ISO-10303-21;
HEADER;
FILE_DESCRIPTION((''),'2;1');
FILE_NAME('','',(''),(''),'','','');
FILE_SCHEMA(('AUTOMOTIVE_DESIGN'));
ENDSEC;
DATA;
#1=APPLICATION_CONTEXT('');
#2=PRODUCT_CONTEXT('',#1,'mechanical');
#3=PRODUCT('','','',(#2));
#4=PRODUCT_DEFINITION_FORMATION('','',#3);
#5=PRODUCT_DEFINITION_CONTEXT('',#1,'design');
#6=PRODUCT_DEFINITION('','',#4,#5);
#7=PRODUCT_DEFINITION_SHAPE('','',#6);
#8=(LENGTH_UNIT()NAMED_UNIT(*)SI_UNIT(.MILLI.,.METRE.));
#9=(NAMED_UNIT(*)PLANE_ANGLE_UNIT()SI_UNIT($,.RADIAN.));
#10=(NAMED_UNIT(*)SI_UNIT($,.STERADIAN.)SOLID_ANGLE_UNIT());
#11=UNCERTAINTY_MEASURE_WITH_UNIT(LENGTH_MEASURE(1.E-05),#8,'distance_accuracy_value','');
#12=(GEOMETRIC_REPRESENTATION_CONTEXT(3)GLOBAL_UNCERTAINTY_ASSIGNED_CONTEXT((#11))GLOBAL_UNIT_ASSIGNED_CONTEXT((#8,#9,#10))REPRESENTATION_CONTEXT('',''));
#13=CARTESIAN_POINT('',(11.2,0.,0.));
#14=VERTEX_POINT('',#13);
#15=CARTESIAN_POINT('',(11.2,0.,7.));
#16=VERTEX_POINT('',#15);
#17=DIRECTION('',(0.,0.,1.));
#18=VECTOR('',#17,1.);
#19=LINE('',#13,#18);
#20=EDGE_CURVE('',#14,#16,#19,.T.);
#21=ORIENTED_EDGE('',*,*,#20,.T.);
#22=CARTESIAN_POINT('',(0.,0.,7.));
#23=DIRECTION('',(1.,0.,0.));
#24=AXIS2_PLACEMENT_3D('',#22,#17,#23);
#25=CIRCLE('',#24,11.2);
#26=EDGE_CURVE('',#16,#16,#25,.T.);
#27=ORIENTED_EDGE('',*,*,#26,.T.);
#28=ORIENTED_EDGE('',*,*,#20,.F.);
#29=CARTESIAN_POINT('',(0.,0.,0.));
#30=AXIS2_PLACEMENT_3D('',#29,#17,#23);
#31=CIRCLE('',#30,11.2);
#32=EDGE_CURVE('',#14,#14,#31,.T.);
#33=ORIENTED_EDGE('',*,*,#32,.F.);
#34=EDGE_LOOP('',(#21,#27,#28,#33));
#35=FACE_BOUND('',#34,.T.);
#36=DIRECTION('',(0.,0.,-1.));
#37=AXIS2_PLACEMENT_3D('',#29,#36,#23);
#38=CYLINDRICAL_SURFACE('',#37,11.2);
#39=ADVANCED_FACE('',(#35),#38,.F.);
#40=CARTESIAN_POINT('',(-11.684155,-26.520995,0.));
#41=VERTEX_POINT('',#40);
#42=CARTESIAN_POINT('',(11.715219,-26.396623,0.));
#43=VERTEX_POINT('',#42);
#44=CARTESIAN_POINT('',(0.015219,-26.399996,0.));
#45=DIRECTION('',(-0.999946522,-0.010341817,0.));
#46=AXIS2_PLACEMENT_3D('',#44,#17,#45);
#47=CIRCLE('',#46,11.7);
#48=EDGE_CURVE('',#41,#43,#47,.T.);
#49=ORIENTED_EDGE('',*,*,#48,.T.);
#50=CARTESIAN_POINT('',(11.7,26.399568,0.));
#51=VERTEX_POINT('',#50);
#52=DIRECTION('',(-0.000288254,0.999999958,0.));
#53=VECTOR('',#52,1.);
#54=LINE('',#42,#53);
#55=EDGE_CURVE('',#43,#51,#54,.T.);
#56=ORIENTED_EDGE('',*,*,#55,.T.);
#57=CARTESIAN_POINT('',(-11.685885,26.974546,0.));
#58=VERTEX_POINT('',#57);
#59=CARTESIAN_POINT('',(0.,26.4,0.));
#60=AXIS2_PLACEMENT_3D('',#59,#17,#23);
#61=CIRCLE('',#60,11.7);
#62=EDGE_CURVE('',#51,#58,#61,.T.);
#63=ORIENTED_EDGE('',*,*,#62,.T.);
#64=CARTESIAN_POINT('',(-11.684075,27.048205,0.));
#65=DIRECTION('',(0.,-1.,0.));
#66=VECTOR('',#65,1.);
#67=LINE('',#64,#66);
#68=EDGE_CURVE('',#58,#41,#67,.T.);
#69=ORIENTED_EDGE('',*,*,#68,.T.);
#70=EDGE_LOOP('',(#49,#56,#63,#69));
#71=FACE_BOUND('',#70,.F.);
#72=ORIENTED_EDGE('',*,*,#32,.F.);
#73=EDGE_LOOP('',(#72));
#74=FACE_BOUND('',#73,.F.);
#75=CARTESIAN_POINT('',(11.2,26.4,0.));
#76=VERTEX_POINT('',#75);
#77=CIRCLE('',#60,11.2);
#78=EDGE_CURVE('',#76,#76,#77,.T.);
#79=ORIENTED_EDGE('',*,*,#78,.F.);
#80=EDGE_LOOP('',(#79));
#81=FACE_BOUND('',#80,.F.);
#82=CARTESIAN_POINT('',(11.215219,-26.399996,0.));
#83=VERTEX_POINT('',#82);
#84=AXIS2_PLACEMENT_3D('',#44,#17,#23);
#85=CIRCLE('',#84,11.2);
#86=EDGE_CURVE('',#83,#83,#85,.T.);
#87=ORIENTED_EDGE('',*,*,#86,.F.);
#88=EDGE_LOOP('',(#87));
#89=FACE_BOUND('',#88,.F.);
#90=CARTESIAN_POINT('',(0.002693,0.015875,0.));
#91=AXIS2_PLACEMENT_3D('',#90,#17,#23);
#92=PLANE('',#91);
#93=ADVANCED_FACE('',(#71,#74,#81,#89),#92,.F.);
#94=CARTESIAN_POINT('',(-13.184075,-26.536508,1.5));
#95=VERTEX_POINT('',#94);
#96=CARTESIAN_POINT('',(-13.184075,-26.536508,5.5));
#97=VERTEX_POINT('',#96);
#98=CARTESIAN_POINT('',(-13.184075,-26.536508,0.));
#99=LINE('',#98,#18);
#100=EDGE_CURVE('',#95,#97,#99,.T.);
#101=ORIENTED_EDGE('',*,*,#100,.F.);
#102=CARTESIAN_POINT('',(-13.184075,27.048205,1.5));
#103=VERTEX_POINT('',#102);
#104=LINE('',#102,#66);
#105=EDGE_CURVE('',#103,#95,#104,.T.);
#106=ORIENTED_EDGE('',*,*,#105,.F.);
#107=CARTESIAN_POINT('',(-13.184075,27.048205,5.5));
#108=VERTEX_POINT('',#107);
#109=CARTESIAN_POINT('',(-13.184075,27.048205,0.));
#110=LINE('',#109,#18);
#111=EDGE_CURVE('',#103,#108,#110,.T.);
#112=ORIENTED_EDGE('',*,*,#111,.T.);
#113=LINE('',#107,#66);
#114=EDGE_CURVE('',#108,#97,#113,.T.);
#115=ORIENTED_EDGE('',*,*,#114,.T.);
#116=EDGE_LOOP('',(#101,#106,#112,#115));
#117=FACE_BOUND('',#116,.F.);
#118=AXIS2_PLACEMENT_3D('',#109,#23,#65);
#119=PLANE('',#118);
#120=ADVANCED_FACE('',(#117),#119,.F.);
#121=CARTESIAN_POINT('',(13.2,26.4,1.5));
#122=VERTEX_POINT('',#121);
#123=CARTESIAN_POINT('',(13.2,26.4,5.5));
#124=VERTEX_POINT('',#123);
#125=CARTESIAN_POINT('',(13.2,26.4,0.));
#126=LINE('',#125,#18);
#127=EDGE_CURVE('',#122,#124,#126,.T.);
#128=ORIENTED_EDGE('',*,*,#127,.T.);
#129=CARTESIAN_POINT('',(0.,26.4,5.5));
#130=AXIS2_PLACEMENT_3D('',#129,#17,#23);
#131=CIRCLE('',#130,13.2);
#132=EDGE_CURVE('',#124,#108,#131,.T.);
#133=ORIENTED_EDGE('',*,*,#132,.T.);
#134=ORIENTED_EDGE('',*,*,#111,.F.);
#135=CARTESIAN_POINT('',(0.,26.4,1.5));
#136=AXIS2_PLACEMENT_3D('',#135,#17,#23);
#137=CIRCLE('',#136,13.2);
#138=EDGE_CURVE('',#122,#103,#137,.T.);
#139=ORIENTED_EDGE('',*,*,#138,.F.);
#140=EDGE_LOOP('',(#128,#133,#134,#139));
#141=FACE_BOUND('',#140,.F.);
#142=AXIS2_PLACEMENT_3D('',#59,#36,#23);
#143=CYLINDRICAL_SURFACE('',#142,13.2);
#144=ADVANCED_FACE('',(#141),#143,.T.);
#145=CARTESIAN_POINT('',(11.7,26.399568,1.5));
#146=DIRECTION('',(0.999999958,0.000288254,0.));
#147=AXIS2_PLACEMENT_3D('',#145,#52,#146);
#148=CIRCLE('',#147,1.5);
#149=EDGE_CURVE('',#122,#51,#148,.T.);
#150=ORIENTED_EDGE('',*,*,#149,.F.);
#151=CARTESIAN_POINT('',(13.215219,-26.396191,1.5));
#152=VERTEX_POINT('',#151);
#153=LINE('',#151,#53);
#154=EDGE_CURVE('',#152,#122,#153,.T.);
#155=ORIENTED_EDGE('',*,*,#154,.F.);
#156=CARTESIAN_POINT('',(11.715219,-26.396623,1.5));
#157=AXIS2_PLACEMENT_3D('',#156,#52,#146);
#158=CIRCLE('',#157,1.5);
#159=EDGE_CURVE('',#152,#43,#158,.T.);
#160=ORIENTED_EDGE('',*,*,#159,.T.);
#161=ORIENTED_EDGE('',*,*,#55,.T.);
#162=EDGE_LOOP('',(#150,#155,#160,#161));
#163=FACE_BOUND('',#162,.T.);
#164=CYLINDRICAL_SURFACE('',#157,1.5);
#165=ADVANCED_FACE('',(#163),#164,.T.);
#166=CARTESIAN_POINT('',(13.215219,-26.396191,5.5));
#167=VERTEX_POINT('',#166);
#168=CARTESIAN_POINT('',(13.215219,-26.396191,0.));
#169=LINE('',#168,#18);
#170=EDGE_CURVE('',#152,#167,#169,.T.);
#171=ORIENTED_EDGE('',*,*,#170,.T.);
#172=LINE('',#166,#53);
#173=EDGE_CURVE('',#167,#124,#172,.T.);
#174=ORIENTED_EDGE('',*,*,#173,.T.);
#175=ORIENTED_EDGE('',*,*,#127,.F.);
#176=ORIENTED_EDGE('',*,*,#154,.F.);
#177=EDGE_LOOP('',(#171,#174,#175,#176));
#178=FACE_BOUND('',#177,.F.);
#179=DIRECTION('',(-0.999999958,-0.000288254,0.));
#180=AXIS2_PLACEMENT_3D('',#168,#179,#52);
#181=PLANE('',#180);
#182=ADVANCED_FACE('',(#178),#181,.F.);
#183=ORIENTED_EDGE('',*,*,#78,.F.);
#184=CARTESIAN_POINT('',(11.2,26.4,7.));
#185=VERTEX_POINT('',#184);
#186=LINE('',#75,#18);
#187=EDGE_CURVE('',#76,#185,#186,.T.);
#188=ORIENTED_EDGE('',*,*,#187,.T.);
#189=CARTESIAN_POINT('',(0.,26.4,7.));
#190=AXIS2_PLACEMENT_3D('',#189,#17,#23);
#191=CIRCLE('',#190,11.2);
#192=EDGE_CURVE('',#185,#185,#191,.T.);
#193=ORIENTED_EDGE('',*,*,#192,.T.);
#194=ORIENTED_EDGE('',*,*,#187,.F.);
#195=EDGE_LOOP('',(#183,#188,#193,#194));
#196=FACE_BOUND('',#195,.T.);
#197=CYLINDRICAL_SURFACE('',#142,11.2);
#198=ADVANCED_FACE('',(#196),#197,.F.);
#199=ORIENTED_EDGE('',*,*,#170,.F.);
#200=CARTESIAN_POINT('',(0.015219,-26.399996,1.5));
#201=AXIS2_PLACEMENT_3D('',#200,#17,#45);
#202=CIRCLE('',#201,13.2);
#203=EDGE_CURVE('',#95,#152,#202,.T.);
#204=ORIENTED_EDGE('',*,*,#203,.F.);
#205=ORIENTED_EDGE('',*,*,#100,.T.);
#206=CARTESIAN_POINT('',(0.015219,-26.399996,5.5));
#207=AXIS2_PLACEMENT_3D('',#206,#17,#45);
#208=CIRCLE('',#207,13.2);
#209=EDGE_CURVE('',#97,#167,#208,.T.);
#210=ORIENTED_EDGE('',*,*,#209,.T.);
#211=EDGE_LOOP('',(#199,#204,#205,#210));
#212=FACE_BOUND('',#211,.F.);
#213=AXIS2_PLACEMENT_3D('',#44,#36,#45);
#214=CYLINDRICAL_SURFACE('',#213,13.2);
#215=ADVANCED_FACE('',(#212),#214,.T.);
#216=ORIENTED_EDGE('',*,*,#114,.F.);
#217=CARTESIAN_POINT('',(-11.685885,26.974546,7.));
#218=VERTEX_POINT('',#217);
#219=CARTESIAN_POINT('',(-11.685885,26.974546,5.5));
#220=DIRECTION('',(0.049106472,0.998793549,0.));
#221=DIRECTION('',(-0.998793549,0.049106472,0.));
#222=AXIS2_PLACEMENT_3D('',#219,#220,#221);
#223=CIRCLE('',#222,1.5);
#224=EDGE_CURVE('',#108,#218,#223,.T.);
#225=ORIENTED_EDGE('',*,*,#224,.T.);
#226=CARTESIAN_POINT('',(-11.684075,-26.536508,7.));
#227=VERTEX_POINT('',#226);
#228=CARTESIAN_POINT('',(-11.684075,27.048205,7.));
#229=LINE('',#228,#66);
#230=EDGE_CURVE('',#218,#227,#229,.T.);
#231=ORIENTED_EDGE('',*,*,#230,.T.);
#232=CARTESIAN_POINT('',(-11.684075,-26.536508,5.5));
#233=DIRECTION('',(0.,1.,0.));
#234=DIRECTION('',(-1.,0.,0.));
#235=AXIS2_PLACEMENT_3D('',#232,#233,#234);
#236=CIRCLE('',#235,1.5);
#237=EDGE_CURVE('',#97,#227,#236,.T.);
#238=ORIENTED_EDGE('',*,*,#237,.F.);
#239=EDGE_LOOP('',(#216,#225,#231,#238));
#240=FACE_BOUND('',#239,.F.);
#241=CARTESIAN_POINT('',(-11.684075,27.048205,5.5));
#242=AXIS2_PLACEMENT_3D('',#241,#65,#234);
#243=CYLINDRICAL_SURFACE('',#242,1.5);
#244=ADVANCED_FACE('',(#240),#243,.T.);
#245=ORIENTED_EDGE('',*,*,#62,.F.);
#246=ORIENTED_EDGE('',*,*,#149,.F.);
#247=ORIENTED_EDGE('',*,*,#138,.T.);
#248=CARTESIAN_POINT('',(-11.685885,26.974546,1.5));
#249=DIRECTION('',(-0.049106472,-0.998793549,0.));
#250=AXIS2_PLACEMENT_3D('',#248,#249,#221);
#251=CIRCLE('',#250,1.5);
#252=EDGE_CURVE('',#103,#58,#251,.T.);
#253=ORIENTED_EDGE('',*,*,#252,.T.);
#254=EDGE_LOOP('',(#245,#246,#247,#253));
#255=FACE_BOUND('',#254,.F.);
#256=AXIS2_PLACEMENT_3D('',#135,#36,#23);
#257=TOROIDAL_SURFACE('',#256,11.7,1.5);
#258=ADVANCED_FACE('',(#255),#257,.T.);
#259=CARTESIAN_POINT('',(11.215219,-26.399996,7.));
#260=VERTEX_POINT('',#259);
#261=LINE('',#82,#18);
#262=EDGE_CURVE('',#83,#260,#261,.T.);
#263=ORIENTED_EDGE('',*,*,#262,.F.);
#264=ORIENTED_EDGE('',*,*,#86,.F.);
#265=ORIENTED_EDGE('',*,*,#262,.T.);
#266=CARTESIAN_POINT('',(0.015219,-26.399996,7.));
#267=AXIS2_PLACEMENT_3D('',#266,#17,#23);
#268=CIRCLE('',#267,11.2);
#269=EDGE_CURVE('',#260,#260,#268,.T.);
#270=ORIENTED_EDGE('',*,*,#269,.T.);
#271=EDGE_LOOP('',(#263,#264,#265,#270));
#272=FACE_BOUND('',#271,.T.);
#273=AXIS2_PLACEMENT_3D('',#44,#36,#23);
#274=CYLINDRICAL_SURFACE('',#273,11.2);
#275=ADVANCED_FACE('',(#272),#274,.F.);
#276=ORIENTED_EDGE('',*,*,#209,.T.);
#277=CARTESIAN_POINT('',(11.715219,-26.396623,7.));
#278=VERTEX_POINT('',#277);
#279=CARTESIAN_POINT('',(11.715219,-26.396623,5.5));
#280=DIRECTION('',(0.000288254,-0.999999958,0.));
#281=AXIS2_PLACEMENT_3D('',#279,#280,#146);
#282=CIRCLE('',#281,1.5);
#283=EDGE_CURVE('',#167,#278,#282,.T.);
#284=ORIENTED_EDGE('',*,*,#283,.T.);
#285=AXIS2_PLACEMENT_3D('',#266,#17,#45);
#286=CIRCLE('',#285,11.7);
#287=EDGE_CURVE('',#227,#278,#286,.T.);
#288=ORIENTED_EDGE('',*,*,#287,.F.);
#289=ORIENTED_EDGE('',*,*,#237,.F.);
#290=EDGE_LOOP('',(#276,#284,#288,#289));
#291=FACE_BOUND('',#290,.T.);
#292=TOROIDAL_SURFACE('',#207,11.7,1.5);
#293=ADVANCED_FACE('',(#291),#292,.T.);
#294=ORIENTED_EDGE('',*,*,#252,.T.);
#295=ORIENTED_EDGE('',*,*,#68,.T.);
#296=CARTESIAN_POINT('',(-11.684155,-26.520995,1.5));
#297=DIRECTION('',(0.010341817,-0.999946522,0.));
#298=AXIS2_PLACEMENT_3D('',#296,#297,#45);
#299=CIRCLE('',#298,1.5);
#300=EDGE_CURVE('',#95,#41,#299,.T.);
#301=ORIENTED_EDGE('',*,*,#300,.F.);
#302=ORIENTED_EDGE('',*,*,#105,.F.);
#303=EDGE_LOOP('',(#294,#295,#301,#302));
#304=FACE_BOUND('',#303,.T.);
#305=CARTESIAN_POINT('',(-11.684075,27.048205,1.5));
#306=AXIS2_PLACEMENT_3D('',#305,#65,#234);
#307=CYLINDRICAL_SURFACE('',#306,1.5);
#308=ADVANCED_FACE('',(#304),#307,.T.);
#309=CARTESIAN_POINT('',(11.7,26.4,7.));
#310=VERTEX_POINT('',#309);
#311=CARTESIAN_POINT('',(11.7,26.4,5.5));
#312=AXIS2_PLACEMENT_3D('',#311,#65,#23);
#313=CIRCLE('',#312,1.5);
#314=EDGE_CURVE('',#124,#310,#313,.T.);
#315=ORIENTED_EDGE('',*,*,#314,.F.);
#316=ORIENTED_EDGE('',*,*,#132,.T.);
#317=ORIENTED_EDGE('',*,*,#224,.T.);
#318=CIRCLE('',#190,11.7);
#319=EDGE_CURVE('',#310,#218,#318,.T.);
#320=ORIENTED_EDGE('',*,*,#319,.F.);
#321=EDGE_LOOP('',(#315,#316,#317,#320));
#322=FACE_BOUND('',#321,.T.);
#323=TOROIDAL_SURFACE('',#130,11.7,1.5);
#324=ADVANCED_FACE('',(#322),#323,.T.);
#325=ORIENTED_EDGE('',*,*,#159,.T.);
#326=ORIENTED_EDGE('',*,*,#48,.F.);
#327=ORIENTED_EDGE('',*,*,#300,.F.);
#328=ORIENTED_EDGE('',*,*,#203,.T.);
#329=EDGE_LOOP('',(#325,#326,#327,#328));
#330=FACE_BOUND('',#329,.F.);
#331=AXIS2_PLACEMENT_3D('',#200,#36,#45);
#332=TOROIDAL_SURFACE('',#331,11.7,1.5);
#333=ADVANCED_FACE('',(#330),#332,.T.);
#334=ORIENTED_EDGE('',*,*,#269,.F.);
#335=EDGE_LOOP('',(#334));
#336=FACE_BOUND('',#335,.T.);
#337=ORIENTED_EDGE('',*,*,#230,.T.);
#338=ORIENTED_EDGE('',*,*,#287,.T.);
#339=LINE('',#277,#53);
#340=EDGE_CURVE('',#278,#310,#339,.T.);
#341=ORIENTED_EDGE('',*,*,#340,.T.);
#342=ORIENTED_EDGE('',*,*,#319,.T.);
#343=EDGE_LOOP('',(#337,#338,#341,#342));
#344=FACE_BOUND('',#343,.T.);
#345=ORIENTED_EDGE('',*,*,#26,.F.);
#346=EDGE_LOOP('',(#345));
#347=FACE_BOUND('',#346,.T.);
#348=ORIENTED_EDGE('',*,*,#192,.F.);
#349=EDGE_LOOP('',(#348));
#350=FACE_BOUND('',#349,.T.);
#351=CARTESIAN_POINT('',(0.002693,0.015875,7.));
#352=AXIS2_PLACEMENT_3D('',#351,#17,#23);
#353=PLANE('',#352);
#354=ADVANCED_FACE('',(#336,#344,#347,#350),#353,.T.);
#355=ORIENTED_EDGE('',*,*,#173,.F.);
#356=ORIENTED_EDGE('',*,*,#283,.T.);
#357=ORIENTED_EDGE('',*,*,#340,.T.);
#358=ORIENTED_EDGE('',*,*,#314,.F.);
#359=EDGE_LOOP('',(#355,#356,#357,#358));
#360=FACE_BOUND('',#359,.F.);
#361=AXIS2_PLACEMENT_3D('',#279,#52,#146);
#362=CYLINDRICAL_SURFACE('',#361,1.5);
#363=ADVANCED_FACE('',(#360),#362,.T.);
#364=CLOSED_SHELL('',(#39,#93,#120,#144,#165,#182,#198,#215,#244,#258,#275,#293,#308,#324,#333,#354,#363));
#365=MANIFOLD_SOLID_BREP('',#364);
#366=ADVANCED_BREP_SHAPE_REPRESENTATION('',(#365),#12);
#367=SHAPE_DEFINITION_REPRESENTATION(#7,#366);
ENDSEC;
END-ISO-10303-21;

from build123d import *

# Parameters (mm, degrees)
F0_R     = 11.2
F1_DEPTH = 7
F2_R     = 1.5


with BuildPart() as f1:
    # F0 (on Top) → F1 (new body)
    with BuildSketch(Plane.XY):
        with BuildLine():
            Line((-13.1840748528, 25.7517945722), (-13.1840748528, 0.6482054278))
            Line((-13.1840748528, 0.6482054278), (-13.1840748528, -0.6482054278))
            Line((-13.1840748528, -0.6482054278), (-13.1840748528, -26.2634836304))
            Line((-13.1840748528, -26.2634836304), (-13.1840748528, -26.5365075959))
            ThreePointArc((-13.1840748528, -26.5365075959), (0.0853785885, -39.5998091598), (13.215218689, -26.3961906666))
            Line((13.215218689, -26.3961906666), (13.2, 26.4))
            ThreePointArc((13.2, 26.4), (0.3242005116, 39.5960181126), (-13.1840748528, 27.0482054278))
            Line((-13.1840748528, 27.0482054278), (-13.1840748528, 25.7517945722))
        make_face()
        Circle(F0_R, mode=Mode.SUBTRACT)
        with Locations((0.0152192374, -26.3999956132)):
            Circle(F0_R, mode=Mode.SUBTRACT)
        with Locations((0, 26.4)):
            Circle(F0_R, mode=Mode.SUBTRACT)
    extrude(amount=F1_DEPTH)

    # F2
    f2_edges = [f1.edges().sort_by_distance(p)[0] for p in [
        (0.085379, -39.599809, 0),
        (0.324201, 39.596018, 0),
        (0.324201, 39.596018, 7),
        (-13.184075, 0.255849, 7),
        (13.207609, 0.001905, 7),
        (13.207609, 0.001905, 0),
        (-13.184075, 0.255849, 0),
        (0.085379, -39.599809, 7),
    ]]
    fillet(f2_edges, radius=F2_R)


solid = f1.part
